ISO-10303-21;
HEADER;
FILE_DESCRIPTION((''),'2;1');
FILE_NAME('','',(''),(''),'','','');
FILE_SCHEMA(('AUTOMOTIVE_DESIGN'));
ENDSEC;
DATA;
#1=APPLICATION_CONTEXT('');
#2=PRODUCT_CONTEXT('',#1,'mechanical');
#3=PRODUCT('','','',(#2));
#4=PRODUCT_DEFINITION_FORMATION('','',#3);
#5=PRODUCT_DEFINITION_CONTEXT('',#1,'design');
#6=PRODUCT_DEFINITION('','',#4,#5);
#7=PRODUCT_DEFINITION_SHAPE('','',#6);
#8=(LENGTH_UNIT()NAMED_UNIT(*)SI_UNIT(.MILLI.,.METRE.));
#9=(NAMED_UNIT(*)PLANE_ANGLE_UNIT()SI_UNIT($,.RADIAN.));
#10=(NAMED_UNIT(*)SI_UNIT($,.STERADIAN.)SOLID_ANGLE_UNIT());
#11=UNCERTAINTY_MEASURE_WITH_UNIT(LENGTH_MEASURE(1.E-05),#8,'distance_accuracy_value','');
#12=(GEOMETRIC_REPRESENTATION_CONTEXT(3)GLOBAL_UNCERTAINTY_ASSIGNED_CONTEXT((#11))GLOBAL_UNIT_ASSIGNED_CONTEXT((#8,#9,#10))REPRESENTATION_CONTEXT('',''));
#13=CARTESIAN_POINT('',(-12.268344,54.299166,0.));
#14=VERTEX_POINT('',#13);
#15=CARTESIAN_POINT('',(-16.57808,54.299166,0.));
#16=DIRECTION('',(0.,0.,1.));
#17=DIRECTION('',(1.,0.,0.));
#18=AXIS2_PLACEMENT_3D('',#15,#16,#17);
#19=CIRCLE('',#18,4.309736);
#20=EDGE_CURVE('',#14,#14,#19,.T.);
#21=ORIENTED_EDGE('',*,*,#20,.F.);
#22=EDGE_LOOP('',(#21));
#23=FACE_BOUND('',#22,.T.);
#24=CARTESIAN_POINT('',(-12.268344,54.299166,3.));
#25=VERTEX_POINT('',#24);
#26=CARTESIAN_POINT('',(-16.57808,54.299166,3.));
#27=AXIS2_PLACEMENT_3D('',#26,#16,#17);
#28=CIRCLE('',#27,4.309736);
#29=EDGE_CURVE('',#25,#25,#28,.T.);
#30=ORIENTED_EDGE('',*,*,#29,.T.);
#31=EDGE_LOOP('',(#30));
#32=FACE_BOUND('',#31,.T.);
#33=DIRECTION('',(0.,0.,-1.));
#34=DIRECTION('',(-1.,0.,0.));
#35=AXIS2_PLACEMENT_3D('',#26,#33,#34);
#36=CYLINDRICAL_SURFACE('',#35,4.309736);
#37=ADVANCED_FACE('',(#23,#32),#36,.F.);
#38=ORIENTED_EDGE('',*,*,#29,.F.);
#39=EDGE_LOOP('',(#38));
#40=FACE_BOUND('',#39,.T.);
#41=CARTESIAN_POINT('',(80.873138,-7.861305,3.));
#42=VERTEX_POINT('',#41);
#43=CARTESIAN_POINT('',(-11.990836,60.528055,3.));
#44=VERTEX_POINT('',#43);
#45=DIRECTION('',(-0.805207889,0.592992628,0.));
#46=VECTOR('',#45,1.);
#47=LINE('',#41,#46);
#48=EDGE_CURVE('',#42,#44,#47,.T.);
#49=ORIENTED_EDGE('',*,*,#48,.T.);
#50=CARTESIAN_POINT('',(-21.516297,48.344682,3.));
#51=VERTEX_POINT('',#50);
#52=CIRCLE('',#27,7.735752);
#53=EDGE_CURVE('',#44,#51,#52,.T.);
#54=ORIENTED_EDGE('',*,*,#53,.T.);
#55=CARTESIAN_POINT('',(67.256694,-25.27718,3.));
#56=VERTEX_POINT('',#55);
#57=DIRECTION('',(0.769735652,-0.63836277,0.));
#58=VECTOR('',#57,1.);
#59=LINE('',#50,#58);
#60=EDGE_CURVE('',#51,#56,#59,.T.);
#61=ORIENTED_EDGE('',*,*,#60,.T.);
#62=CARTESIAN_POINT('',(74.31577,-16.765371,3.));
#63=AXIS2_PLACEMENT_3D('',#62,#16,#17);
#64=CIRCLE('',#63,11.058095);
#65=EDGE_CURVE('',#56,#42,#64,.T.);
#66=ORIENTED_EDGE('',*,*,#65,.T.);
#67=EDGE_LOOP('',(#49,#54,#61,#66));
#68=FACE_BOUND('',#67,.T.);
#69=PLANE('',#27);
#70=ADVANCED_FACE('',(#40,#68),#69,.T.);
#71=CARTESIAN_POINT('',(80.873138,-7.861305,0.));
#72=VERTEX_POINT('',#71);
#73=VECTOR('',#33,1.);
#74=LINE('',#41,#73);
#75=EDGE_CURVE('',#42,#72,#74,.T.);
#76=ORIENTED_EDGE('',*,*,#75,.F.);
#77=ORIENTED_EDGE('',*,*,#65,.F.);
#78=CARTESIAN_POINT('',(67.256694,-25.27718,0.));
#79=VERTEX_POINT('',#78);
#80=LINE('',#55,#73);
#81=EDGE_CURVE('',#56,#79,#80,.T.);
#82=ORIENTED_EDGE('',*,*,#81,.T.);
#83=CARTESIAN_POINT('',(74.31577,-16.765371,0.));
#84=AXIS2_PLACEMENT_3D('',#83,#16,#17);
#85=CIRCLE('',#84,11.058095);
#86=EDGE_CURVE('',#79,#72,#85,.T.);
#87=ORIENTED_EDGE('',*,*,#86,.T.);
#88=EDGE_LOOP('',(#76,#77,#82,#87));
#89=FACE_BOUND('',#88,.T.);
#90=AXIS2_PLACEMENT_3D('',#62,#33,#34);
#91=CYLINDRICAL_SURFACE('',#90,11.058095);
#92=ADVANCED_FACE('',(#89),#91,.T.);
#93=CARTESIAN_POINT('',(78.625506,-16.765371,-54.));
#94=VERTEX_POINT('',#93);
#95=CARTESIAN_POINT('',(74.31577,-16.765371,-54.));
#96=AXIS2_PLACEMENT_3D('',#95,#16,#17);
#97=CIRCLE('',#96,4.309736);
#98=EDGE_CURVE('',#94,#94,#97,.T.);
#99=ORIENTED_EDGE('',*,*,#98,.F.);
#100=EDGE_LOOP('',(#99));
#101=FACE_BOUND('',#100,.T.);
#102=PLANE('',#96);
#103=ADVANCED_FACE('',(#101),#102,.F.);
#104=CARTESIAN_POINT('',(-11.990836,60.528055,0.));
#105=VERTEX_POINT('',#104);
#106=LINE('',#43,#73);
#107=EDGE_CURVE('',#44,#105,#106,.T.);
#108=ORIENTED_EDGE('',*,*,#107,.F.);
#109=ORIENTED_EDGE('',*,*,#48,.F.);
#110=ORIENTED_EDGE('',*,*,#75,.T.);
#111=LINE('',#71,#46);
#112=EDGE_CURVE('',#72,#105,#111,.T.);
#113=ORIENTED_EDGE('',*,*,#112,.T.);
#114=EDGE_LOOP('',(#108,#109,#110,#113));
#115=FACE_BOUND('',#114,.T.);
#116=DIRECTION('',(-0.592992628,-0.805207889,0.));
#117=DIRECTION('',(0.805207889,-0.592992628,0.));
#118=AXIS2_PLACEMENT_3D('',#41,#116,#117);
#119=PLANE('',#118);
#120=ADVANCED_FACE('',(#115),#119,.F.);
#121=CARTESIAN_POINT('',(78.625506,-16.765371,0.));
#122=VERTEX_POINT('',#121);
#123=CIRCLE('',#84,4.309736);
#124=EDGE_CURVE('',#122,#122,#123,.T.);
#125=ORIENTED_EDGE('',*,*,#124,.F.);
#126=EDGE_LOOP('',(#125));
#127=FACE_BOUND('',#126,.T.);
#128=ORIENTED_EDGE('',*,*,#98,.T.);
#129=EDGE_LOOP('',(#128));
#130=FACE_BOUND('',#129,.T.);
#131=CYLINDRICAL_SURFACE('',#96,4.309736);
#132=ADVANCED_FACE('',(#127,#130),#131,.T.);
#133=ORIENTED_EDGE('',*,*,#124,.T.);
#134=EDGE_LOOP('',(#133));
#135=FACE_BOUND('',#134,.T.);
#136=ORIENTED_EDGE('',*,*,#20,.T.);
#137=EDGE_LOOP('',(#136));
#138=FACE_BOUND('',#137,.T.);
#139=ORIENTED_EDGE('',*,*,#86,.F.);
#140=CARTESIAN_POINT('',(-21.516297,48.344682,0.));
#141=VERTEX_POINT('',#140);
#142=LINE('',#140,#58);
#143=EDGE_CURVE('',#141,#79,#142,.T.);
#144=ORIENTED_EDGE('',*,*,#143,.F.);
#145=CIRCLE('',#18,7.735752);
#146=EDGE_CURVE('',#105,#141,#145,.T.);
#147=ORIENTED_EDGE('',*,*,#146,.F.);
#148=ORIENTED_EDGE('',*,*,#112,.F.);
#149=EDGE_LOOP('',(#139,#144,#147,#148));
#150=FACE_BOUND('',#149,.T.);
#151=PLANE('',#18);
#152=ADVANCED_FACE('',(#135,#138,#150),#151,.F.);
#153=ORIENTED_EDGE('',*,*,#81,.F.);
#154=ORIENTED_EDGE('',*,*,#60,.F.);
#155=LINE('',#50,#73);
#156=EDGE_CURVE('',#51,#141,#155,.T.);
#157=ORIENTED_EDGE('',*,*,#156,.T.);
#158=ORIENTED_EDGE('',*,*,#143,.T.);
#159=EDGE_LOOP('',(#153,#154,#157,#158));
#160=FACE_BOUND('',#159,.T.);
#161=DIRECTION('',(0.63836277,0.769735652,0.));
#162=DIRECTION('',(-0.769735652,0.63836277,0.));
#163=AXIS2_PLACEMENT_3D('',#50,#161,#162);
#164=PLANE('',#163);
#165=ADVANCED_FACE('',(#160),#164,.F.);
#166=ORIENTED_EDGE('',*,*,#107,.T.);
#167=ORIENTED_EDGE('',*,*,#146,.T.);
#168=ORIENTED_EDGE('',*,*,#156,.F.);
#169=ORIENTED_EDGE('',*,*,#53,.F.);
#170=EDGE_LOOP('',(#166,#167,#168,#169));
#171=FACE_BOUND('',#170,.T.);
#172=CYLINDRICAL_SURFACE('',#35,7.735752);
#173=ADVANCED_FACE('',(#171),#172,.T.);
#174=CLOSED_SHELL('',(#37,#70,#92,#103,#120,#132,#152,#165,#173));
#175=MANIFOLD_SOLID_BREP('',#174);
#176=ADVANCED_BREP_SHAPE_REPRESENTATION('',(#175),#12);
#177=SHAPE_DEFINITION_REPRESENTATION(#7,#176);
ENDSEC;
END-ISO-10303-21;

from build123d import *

# Parameters (mm, degrees)
EXTRUDE1_OUTLINE_R = 4.309736146
EXTRUDE1_DEPTH     = 3
EXTRUDE2_START     = -57
SKETCH2_R          = 4.309736146
EXTRUDE2_DEPTH     = 57


# Read off the part's stored shape, not the designer's step: Extrude1
with BuildPart() as part:
    # Extrude1 outline → Extrude1 (new body)
    with BuildSketch(Plane.XY):
        with BuildLine():
            ThreePointArc((-11.990836263, 60.528054794), (-22.672294112, 59.063871996), (-21.516296681, 48.344681589))
            Line((-21.516296681, 48.344681589), (67.256693566, -25.277180433))
            ThreePointArc((67.256693566, -25.277180433), (83.02731963, -23.576417361), (80.873138344, -7.861305383))
            Line((80.873138344, -7.861305383), (-11.990836263, 60.528054794))
        make_face()
        with Locations((74.315769624, -16.765370586)):
            Circle(EXTRUDE1_OUTLINE_R, mode=Mode.SUBTRACT)
        with Locations((-16.578080379, 54.299165973)):
            Circle(EXTRUDE1_OUTLINE_R, mode=Mode.SUBTRACT)
    extrude(amount=EXTRUDE1_DEPTH)

    # Sketch2 → Extrude2 (add)
    with BuildSketch(Plane.XY.offset(3).offset(EXTRUDE2_START)):
        with Locations((74.315769624, -16.765370586)):
            Circle(SKETCH2_R)
    extrude(amount=EXTRUDE2_DEPTH)


solid = part.part
